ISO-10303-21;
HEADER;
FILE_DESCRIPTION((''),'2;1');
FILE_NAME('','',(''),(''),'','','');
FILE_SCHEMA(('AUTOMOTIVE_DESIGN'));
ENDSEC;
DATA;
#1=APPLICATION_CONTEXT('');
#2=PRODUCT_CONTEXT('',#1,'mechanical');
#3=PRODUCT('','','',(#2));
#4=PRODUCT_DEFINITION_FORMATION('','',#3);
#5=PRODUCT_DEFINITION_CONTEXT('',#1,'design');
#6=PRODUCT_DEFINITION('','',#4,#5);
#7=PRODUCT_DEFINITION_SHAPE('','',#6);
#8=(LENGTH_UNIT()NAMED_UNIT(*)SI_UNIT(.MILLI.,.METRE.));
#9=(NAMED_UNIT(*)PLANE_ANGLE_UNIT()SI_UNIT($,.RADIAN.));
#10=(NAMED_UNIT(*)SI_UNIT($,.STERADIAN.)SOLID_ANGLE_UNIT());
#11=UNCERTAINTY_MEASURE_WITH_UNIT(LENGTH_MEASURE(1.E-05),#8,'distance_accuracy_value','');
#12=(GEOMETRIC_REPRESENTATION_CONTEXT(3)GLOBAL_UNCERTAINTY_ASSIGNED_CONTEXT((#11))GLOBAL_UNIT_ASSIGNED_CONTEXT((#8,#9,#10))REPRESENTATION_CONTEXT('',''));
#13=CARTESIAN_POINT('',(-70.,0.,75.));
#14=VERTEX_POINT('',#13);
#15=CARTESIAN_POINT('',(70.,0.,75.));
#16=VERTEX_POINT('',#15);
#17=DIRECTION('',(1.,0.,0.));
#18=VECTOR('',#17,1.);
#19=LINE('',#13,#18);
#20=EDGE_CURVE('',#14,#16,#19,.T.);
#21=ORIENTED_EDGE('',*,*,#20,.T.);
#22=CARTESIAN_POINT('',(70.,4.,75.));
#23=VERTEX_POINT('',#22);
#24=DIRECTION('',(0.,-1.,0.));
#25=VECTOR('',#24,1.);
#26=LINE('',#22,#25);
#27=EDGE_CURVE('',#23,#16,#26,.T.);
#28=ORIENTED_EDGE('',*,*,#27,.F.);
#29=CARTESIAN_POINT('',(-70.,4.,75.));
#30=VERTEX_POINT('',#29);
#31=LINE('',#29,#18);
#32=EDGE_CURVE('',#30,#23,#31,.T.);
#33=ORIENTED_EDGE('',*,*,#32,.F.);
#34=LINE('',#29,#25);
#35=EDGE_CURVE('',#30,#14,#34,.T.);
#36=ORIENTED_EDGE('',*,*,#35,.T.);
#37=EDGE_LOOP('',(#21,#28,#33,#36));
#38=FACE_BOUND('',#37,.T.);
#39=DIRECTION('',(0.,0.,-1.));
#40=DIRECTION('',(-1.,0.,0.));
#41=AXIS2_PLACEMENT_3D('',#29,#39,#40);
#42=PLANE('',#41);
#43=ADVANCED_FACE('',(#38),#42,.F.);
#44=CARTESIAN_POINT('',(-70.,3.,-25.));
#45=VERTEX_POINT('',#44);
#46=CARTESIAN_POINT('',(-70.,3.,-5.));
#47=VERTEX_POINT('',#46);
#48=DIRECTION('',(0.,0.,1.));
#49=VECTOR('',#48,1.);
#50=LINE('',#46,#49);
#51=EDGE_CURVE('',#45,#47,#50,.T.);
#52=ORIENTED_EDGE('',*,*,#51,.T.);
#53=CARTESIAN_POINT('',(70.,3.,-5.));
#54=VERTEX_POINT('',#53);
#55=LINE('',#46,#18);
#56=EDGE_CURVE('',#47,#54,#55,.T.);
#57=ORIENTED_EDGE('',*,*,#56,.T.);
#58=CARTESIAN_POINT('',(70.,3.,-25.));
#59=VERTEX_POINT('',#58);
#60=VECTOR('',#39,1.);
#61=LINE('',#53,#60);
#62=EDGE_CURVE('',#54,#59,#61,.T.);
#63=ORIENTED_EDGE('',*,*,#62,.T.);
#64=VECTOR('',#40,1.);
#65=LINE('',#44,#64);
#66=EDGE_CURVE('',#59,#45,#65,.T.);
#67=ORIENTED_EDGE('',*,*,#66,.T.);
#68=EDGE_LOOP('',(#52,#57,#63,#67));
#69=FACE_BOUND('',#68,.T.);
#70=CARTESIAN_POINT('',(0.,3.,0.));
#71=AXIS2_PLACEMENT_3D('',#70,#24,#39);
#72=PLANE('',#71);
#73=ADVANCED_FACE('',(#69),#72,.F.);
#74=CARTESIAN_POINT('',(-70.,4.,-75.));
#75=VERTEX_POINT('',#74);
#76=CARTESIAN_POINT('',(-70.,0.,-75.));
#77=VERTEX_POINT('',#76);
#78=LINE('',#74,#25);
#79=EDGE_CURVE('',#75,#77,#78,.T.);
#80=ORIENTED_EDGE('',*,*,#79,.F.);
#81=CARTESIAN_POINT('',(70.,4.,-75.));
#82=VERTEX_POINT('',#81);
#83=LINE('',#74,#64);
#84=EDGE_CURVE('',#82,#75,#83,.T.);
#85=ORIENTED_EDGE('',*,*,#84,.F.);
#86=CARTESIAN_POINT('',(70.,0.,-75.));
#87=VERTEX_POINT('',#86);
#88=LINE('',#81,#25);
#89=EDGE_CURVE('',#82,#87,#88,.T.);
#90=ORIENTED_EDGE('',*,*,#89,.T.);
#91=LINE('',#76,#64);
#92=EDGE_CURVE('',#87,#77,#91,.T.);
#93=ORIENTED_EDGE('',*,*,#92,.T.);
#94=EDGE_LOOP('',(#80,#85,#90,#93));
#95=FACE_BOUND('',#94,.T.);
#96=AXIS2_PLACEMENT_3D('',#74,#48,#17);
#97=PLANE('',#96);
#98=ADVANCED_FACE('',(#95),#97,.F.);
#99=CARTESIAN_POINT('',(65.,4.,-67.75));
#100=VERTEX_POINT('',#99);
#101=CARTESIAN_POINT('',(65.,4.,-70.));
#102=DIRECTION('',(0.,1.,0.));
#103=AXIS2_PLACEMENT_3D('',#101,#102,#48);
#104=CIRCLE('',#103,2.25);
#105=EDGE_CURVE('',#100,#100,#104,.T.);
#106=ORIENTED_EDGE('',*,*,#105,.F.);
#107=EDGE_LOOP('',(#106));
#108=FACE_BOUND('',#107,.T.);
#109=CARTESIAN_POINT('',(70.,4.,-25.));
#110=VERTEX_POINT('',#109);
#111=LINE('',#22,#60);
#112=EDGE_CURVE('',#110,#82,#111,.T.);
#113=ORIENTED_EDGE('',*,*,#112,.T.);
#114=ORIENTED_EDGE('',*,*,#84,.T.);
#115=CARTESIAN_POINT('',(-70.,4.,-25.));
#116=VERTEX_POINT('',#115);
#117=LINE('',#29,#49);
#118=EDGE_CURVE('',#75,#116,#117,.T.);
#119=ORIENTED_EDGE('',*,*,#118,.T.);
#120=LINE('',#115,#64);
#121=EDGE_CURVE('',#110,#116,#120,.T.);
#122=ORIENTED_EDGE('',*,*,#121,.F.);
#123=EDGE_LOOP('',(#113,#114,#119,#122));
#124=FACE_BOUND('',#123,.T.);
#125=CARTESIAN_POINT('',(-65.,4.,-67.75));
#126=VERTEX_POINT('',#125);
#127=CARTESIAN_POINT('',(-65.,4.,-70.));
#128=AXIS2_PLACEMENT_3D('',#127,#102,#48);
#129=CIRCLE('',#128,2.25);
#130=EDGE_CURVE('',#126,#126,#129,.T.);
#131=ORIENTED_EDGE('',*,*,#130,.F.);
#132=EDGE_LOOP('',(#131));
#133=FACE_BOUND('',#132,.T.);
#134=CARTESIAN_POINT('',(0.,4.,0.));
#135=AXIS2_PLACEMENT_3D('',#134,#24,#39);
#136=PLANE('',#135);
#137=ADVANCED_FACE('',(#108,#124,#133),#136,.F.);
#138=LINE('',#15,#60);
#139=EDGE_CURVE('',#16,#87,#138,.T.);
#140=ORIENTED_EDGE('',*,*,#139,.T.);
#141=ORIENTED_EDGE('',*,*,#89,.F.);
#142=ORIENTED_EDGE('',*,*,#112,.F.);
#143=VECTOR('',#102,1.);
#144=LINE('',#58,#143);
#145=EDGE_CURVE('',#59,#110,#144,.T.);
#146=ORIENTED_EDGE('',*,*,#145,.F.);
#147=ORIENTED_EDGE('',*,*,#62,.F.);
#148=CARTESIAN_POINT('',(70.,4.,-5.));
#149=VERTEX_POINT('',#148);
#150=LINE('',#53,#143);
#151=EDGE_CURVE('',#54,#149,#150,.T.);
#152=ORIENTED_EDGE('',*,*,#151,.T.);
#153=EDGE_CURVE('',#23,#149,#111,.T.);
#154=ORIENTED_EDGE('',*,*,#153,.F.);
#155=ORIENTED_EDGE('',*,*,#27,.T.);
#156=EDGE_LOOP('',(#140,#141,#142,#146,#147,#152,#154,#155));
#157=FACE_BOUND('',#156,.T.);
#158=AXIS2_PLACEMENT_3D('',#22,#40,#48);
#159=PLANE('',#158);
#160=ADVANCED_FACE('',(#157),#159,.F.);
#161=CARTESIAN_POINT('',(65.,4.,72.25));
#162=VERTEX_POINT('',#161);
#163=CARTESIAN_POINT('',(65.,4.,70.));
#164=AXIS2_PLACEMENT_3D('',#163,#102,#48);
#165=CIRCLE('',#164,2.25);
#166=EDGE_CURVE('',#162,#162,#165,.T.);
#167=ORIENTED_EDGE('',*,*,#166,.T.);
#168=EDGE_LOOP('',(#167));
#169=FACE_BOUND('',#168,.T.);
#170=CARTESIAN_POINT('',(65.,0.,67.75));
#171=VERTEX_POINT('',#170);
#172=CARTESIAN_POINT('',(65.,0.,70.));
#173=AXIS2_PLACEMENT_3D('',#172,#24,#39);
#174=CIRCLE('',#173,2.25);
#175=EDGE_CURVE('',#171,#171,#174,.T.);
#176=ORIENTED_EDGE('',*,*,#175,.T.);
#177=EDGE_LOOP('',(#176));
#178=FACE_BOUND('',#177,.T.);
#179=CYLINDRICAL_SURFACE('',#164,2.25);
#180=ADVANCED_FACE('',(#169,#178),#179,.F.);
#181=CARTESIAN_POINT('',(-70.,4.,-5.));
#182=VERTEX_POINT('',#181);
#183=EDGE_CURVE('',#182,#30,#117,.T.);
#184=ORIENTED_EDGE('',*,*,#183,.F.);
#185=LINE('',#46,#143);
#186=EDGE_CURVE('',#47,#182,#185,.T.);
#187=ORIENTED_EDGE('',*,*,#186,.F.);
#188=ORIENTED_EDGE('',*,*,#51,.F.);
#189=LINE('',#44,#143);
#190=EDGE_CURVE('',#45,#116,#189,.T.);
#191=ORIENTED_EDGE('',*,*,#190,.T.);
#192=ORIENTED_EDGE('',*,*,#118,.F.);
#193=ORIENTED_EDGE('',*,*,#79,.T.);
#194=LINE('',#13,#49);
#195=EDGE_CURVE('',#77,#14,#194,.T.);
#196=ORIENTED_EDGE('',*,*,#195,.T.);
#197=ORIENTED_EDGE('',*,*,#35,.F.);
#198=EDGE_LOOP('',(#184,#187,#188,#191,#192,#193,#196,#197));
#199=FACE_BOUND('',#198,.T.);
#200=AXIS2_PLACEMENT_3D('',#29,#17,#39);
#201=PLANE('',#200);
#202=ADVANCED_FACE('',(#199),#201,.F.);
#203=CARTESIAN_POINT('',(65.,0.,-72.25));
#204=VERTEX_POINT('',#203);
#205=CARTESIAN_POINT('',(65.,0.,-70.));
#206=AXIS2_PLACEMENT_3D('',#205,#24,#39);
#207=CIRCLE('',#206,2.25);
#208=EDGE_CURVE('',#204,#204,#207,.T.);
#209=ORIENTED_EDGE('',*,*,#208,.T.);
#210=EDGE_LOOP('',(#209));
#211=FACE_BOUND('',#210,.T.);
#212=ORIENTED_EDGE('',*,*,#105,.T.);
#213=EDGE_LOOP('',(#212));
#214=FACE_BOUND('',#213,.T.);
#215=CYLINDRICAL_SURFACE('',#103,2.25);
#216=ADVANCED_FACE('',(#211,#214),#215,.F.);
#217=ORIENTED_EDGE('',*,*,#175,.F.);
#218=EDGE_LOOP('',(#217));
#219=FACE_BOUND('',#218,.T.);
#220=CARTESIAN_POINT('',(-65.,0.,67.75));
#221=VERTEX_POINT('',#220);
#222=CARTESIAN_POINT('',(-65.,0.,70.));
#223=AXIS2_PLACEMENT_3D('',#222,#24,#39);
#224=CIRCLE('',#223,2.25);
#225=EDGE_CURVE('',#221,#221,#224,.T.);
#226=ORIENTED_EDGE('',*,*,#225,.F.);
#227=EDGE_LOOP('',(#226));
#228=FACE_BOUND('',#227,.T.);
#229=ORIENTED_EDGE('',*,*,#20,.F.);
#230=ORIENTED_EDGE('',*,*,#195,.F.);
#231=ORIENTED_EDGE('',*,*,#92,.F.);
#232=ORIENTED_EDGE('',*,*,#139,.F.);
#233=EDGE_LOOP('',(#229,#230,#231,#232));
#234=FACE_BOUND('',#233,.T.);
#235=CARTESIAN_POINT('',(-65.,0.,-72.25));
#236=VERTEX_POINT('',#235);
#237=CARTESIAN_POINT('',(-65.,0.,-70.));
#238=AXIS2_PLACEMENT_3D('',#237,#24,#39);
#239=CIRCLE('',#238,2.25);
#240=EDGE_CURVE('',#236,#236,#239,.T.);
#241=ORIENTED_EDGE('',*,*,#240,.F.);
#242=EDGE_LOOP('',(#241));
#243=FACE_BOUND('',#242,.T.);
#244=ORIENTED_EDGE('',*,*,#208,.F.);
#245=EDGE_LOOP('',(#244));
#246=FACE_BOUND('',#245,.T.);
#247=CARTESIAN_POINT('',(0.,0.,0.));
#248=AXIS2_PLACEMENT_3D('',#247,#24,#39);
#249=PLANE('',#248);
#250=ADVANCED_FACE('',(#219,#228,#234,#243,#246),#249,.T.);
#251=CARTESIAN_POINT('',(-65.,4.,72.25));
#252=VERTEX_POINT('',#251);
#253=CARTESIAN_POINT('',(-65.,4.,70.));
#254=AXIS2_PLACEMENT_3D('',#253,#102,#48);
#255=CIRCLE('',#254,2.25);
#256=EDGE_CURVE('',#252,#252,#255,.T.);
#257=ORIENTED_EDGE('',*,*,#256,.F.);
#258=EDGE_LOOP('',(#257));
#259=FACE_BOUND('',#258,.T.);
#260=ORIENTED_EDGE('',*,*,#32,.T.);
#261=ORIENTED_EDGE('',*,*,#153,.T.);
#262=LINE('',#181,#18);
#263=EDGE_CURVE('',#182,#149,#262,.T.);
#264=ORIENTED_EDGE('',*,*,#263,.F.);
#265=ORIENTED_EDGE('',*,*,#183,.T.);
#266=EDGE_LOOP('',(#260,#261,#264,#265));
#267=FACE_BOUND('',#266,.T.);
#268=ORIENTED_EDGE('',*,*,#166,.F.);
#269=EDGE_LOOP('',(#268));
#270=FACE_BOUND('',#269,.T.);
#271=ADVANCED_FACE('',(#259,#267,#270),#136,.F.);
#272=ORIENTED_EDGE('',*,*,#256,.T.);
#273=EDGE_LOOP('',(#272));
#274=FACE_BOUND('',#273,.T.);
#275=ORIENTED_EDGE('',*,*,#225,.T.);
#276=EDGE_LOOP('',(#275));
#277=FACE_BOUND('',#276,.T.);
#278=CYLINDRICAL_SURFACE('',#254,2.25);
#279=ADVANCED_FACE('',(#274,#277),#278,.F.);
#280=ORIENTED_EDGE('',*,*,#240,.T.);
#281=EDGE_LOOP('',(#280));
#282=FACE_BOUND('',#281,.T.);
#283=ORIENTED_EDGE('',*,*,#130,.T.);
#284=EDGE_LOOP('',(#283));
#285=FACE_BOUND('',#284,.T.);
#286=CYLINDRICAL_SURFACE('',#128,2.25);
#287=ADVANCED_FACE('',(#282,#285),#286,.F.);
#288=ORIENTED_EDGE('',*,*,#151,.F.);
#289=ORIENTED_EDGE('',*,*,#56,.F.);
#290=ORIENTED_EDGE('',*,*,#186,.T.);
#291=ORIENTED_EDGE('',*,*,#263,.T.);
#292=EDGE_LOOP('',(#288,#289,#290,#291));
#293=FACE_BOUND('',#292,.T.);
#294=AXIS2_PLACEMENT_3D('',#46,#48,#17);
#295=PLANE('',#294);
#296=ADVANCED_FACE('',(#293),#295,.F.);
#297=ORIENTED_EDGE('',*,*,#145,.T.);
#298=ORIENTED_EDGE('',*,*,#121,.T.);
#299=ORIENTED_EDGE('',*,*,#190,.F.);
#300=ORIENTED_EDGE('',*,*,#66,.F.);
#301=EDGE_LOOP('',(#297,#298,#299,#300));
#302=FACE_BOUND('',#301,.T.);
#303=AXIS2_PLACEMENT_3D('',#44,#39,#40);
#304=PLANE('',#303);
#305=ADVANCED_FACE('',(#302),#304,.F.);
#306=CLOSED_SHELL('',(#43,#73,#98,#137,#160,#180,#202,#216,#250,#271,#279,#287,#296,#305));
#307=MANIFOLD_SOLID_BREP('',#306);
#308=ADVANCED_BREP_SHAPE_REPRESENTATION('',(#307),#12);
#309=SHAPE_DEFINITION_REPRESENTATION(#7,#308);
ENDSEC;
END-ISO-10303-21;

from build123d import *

# Parameters (mm, degrees)
SKETCH1_W                = 140
SKETCH1_H                = 150
BODY_DEPTH               = 4
MOUNTING_HOLES_OUTLINE_R = 2.25
MOUNTING_HOLES_DEPTH     = 4
SKETCH5_W                = 140
SKETCH5_H                = 20
CABLE_CANAL_DEPTH        = 1


# Read off the part's stored shape, not the designer's step: mounting_holes
with BuildPart() as part:
    # Sketch1 → body (new body)
    with BuildSketch(Plane(origin=(0, 0, 0), x_dir=(1, 0, 0), z_dir=(0, 1, 0))):
        Rectangle(SKETCH1_W, SKETCH1_H)
    extrude(amount=BODY_DEPTH)

    # mounting_holes outline → mounting_holes (cut)
    with BuildSketch(Plane(origin=(0, 0, 0), x_dir=(1, 0, 0), z_dir=(0, 1, 0))):
        with Locations((65, 70)):
            Circle(MOUNTING_HOLES_OUTLINE_R)
        with Locations((-65, -70)):
            Circle(MOUNTING_HOLES_OUTLINE_R)
        with Locations((65, -70)):
            Circle(MOUNTING_HOLES_OUTLINE_R)
        with Locations((-65, 70)):
            Circle(MOUNTING_HOLES_OUTLINE_R)
    extrude(amount=MOUNTING_HOLES_DEPTH, mode=Mode.SUBTRACT)

    # Sketch5 → cable_canal (cut)
    with BuildSketch(Plane(origin=(0, 4, 0), x_dir=(1, 0, 0), z_dir=(0, 1, 0))):
        with Locations((0, 15)):
            Rectangle(SKETCH5_W, SKETCH5_H)
    extrude(amount=-CABLE_CANAL_DEPTH, mode=Mode.SUBTRACT)


solid = part.part
